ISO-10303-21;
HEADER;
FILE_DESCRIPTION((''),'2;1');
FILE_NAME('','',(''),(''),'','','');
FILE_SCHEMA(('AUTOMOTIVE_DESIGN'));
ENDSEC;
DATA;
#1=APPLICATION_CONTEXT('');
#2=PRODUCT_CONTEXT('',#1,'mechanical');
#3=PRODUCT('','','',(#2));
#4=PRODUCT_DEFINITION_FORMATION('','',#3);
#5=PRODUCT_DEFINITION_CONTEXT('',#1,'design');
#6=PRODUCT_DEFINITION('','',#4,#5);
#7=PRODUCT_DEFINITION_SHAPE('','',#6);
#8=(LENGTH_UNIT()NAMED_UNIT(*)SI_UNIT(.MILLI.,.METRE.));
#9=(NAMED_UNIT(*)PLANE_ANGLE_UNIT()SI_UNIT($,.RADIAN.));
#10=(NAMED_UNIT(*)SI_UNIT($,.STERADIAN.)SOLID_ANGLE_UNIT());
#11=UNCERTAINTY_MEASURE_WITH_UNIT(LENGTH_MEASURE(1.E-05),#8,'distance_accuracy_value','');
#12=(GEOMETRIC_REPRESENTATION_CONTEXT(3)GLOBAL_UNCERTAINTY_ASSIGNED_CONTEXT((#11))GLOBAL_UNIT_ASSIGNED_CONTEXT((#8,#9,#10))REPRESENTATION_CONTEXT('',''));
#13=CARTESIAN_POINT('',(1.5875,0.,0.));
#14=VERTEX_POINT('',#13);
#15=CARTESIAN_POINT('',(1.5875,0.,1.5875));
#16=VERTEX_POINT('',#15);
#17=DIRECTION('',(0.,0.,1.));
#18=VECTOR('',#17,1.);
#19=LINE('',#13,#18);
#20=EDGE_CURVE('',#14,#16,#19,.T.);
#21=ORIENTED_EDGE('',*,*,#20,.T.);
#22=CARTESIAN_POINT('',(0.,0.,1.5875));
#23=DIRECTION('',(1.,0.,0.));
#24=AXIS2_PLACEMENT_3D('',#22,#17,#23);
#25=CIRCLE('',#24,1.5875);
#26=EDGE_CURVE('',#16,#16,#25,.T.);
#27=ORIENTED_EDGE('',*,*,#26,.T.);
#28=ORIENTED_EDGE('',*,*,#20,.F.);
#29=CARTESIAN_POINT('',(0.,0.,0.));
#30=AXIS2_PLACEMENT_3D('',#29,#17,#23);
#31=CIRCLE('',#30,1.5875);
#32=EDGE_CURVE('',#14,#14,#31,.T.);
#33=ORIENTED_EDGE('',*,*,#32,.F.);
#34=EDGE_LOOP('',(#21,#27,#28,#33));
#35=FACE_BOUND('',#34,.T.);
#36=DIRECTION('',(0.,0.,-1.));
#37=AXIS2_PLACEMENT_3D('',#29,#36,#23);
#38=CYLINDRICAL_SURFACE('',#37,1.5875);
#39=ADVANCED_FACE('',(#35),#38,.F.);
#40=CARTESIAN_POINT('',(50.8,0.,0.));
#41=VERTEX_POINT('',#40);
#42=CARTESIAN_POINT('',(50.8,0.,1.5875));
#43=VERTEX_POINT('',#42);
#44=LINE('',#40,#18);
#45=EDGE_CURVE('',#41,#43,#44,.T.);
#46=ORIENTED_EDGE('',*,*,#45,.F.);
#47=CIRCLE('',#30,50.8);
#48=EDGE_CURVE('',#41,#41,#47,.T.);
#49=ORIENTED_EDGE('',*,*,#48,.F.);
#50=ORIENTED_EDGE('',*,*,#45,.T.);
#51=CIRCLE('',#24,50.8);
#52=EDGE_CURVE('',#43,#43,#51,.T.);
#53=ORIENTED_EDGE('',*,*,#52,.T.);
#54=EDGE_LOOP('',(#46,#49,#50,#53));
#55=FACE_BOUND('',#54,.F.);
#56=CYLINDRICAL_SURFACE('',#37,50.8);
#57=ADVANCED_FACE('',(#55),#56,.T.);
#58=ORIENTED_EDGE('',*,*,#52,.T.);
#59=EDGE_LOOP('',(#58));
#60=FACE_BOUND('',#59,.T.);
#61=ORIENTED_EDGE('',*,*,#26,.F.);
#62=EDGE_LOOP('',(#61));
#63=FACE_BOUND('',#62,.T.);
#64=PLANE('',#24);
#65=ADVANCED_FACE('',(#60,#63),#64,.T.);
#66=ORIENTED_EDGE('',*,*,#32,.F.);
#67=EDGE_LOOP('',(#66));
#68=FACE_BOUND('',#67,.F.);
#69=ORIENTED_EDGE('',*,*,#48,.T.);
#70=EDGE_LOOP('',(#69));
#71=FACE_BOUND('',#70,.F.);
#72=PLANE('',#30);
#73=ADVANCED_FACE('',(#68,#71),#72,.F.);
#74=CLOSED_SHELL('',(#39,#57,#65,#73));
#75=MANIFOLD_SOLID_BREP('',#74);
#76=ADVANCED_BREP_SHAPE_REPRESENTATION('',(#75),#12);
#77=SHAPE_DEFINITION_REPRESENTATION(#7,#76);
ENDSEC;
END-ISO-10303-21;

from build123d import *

# Parameters (mm, degrees)
F0_R     = 50.8
F0_R_2   = 6.35
F0_R_3   = 1.5875
F1_DEPTH = 1.5875


# Not quite as in the source:
# - a length typed as a fraction of an inch, garbled in the dataset ("3 / 203.2 mm" for 3/8 in), is restored


with BuildPart() as f1:
    # F0 (on Top) → F1 (new body)
    with BuildSketch(Plane.XY):
        Circle(F0_R)
        Circle(F0_R_2, mode=Mode.SUBTRACT)
        Circle(F0_R_2)
        Circle(F0_R_3, mode=Mode.SUBTRACT)
    extrude(amount=F1_DEPTH)


solid = f1.part
